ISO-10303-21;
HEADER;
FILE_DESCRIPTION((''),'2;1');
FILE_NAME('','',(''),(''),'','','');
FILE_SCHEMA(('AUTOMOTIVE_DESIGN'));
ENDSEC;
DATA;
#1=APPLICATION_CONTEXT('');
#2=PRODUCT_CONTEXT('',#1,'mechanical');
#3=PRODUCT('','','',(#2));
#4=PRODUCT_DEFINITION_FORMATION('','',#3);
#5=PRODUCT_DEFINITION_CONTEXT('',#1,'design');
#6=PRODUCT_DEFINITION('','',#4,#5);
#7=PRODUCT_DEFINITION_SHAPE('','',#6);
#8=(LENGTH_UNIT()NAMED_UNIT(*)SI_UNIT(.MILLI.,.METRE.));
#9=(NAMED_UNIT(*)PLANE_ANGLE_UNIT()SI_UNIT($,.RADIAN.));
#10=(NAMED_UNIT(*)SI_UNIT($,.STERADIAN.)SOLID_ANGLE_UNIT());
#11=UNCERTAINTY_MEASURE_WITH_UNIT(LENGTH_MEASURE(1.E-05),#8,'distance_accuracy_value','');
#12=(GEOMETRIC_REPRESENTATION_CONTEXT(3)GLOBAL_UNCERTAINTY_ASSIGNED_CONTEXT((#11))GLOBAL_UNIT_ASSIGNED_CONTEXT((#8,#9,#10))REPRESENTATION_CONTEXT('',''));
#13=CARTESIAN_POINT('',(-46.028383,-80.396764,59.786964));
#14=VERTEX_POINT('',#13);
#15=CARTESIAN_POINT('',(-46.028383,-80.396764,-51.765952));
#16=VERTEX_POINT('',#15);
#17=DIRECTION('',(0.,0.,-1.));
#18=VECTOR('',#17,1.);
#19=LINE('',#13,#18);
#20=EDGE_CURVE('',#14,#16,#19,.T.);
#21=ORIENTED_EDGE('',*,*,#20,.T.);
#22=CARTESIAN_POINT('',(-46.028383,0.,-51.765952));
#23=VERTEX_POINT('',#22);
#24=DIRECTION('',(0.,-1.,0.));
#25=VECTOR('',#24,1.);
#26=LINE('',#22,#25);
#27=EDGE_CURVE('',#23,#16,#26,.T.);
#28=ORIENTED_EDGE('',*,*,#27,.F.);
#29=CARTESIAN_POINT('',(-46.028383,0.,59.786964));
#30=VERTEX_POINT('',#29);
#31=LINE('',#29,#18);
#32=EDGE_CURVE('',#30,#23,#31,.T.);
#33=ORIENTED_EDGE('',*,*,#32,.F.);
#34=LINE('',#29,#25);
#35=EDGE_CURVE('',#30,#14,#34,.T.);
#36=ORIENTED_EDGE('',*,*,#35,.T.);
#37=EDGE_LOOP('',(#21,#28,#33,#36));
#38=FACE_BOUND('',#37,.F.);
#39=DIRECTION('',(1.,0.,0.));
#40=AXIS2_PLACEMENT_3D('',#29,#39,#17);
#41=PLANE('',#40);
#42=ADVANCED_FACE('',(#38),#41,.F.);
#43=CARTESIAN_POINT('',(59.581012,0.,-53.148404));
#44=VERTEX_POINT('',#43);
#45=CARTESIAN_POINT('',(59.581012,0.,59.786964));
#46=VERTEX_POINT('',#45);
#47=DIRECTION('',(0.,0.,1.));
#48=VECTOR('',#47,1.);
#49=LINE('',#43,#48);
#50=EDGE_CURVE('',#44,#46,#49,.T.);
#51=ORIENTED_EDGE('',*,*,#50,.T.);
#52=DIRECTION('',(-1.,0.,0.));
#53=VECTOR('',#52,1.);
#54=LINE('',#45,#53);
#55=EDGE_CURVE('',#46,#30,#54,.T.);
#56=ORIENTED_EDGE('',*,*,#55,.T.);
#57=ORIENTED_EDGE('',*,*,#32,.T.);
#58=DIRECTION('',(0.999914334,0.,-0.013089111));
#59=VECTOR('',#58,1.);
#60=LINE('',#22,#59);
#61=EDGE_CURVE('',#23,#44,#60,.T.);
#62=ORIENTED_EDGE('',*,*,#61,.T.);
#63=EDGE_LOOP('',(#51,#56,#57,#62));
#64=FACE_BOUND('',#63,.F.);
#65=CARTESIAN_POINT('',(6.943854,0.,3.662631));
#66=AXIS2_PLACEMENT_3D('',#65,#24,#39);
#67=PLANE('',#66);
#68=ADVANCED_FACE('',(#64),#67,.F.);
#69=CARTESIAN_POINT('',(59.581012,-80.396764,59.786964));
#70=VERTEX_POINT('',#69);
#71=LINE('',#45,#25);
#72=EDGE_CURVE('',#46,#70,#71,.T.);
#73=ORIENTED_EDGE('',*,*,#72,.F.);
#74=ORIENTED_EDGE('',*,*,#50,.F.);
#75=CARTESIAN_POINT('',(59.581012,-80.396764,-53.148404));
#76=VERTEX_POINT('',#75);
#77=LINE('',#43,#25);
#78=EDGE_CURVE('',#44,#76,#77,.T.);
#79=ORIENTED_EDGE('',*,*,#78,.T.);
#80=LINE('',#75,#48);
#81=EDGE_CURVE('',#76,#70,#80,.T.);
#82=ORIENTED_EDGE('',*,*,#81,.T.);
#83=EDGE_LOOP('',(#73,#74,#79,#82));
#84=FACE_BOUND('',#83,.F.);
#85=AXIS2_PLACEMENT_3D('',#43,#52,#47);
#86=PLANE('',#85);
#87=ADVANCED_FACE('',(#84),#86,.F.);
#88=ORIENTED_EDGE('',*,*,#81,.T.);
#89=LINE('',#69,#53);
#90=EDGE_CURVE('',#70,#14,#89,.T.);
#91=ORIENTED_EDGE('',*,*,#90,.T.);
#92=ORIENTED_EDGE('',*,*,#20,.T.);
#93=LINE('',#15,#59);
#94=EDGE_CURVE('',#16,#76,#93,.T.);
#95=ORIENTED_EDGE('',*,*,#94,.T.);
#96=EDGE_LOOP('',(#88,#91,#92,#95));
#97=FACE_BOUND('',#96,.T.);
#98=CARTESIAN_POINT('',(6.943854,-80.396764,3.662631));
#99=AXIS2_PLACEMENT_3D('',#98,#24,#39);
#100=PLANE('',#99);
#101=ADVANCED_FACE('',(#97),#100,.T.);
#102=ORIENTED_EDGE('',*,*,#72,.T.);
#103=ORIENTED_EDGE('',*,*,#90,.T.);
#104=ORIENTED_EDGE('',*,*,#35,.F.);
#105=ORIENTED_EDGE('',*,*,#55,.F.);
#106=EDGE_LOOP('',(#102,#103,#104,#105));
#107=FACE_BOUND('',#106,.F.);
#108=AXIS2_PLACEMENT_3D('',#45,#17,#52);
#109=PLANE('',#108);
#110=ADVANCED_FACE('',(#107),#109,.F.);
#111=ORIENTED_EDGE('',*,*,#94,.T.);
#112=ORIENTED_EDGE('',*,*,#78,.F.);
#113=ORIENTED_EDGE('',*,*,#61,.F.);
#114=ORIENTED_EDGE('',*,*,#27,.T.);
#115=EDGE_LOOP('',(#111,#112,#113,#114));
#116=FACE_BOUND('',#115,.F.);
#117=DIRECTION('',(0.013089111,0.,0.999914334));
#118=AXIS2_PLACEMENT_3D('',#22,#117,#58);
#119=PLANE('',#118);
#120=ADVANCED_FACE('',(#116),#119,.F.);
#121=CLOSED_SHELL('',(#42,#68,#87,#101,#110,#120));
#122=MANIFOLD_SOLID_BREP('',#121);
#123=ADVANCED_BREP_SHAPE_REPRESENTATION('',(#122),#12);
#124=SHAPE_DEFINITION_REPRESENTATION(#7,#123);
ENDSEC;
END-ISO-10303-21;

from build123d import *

# Parameters (mm, degrees)
F2_DEPTH = 80.3967639804


# Not quite as in the source:
# - the program builds the solid bodies; features that only make, move or delete a surface that nothing else refers to are left out


with BuildPart() as f2:
    # F0 (on Front) → F2 (new body)
    with BuildSketch(Plane.XZ):
        Polygon((-46.0283830762, 59.7869642079), (-46.0283830762, -51.7659522593), (59.5810115337, -53.1484037638), (59.5810115337, 59.7869642079), align=None)
    extrude(amount=F2_DEPTH)


solid = f2.part
